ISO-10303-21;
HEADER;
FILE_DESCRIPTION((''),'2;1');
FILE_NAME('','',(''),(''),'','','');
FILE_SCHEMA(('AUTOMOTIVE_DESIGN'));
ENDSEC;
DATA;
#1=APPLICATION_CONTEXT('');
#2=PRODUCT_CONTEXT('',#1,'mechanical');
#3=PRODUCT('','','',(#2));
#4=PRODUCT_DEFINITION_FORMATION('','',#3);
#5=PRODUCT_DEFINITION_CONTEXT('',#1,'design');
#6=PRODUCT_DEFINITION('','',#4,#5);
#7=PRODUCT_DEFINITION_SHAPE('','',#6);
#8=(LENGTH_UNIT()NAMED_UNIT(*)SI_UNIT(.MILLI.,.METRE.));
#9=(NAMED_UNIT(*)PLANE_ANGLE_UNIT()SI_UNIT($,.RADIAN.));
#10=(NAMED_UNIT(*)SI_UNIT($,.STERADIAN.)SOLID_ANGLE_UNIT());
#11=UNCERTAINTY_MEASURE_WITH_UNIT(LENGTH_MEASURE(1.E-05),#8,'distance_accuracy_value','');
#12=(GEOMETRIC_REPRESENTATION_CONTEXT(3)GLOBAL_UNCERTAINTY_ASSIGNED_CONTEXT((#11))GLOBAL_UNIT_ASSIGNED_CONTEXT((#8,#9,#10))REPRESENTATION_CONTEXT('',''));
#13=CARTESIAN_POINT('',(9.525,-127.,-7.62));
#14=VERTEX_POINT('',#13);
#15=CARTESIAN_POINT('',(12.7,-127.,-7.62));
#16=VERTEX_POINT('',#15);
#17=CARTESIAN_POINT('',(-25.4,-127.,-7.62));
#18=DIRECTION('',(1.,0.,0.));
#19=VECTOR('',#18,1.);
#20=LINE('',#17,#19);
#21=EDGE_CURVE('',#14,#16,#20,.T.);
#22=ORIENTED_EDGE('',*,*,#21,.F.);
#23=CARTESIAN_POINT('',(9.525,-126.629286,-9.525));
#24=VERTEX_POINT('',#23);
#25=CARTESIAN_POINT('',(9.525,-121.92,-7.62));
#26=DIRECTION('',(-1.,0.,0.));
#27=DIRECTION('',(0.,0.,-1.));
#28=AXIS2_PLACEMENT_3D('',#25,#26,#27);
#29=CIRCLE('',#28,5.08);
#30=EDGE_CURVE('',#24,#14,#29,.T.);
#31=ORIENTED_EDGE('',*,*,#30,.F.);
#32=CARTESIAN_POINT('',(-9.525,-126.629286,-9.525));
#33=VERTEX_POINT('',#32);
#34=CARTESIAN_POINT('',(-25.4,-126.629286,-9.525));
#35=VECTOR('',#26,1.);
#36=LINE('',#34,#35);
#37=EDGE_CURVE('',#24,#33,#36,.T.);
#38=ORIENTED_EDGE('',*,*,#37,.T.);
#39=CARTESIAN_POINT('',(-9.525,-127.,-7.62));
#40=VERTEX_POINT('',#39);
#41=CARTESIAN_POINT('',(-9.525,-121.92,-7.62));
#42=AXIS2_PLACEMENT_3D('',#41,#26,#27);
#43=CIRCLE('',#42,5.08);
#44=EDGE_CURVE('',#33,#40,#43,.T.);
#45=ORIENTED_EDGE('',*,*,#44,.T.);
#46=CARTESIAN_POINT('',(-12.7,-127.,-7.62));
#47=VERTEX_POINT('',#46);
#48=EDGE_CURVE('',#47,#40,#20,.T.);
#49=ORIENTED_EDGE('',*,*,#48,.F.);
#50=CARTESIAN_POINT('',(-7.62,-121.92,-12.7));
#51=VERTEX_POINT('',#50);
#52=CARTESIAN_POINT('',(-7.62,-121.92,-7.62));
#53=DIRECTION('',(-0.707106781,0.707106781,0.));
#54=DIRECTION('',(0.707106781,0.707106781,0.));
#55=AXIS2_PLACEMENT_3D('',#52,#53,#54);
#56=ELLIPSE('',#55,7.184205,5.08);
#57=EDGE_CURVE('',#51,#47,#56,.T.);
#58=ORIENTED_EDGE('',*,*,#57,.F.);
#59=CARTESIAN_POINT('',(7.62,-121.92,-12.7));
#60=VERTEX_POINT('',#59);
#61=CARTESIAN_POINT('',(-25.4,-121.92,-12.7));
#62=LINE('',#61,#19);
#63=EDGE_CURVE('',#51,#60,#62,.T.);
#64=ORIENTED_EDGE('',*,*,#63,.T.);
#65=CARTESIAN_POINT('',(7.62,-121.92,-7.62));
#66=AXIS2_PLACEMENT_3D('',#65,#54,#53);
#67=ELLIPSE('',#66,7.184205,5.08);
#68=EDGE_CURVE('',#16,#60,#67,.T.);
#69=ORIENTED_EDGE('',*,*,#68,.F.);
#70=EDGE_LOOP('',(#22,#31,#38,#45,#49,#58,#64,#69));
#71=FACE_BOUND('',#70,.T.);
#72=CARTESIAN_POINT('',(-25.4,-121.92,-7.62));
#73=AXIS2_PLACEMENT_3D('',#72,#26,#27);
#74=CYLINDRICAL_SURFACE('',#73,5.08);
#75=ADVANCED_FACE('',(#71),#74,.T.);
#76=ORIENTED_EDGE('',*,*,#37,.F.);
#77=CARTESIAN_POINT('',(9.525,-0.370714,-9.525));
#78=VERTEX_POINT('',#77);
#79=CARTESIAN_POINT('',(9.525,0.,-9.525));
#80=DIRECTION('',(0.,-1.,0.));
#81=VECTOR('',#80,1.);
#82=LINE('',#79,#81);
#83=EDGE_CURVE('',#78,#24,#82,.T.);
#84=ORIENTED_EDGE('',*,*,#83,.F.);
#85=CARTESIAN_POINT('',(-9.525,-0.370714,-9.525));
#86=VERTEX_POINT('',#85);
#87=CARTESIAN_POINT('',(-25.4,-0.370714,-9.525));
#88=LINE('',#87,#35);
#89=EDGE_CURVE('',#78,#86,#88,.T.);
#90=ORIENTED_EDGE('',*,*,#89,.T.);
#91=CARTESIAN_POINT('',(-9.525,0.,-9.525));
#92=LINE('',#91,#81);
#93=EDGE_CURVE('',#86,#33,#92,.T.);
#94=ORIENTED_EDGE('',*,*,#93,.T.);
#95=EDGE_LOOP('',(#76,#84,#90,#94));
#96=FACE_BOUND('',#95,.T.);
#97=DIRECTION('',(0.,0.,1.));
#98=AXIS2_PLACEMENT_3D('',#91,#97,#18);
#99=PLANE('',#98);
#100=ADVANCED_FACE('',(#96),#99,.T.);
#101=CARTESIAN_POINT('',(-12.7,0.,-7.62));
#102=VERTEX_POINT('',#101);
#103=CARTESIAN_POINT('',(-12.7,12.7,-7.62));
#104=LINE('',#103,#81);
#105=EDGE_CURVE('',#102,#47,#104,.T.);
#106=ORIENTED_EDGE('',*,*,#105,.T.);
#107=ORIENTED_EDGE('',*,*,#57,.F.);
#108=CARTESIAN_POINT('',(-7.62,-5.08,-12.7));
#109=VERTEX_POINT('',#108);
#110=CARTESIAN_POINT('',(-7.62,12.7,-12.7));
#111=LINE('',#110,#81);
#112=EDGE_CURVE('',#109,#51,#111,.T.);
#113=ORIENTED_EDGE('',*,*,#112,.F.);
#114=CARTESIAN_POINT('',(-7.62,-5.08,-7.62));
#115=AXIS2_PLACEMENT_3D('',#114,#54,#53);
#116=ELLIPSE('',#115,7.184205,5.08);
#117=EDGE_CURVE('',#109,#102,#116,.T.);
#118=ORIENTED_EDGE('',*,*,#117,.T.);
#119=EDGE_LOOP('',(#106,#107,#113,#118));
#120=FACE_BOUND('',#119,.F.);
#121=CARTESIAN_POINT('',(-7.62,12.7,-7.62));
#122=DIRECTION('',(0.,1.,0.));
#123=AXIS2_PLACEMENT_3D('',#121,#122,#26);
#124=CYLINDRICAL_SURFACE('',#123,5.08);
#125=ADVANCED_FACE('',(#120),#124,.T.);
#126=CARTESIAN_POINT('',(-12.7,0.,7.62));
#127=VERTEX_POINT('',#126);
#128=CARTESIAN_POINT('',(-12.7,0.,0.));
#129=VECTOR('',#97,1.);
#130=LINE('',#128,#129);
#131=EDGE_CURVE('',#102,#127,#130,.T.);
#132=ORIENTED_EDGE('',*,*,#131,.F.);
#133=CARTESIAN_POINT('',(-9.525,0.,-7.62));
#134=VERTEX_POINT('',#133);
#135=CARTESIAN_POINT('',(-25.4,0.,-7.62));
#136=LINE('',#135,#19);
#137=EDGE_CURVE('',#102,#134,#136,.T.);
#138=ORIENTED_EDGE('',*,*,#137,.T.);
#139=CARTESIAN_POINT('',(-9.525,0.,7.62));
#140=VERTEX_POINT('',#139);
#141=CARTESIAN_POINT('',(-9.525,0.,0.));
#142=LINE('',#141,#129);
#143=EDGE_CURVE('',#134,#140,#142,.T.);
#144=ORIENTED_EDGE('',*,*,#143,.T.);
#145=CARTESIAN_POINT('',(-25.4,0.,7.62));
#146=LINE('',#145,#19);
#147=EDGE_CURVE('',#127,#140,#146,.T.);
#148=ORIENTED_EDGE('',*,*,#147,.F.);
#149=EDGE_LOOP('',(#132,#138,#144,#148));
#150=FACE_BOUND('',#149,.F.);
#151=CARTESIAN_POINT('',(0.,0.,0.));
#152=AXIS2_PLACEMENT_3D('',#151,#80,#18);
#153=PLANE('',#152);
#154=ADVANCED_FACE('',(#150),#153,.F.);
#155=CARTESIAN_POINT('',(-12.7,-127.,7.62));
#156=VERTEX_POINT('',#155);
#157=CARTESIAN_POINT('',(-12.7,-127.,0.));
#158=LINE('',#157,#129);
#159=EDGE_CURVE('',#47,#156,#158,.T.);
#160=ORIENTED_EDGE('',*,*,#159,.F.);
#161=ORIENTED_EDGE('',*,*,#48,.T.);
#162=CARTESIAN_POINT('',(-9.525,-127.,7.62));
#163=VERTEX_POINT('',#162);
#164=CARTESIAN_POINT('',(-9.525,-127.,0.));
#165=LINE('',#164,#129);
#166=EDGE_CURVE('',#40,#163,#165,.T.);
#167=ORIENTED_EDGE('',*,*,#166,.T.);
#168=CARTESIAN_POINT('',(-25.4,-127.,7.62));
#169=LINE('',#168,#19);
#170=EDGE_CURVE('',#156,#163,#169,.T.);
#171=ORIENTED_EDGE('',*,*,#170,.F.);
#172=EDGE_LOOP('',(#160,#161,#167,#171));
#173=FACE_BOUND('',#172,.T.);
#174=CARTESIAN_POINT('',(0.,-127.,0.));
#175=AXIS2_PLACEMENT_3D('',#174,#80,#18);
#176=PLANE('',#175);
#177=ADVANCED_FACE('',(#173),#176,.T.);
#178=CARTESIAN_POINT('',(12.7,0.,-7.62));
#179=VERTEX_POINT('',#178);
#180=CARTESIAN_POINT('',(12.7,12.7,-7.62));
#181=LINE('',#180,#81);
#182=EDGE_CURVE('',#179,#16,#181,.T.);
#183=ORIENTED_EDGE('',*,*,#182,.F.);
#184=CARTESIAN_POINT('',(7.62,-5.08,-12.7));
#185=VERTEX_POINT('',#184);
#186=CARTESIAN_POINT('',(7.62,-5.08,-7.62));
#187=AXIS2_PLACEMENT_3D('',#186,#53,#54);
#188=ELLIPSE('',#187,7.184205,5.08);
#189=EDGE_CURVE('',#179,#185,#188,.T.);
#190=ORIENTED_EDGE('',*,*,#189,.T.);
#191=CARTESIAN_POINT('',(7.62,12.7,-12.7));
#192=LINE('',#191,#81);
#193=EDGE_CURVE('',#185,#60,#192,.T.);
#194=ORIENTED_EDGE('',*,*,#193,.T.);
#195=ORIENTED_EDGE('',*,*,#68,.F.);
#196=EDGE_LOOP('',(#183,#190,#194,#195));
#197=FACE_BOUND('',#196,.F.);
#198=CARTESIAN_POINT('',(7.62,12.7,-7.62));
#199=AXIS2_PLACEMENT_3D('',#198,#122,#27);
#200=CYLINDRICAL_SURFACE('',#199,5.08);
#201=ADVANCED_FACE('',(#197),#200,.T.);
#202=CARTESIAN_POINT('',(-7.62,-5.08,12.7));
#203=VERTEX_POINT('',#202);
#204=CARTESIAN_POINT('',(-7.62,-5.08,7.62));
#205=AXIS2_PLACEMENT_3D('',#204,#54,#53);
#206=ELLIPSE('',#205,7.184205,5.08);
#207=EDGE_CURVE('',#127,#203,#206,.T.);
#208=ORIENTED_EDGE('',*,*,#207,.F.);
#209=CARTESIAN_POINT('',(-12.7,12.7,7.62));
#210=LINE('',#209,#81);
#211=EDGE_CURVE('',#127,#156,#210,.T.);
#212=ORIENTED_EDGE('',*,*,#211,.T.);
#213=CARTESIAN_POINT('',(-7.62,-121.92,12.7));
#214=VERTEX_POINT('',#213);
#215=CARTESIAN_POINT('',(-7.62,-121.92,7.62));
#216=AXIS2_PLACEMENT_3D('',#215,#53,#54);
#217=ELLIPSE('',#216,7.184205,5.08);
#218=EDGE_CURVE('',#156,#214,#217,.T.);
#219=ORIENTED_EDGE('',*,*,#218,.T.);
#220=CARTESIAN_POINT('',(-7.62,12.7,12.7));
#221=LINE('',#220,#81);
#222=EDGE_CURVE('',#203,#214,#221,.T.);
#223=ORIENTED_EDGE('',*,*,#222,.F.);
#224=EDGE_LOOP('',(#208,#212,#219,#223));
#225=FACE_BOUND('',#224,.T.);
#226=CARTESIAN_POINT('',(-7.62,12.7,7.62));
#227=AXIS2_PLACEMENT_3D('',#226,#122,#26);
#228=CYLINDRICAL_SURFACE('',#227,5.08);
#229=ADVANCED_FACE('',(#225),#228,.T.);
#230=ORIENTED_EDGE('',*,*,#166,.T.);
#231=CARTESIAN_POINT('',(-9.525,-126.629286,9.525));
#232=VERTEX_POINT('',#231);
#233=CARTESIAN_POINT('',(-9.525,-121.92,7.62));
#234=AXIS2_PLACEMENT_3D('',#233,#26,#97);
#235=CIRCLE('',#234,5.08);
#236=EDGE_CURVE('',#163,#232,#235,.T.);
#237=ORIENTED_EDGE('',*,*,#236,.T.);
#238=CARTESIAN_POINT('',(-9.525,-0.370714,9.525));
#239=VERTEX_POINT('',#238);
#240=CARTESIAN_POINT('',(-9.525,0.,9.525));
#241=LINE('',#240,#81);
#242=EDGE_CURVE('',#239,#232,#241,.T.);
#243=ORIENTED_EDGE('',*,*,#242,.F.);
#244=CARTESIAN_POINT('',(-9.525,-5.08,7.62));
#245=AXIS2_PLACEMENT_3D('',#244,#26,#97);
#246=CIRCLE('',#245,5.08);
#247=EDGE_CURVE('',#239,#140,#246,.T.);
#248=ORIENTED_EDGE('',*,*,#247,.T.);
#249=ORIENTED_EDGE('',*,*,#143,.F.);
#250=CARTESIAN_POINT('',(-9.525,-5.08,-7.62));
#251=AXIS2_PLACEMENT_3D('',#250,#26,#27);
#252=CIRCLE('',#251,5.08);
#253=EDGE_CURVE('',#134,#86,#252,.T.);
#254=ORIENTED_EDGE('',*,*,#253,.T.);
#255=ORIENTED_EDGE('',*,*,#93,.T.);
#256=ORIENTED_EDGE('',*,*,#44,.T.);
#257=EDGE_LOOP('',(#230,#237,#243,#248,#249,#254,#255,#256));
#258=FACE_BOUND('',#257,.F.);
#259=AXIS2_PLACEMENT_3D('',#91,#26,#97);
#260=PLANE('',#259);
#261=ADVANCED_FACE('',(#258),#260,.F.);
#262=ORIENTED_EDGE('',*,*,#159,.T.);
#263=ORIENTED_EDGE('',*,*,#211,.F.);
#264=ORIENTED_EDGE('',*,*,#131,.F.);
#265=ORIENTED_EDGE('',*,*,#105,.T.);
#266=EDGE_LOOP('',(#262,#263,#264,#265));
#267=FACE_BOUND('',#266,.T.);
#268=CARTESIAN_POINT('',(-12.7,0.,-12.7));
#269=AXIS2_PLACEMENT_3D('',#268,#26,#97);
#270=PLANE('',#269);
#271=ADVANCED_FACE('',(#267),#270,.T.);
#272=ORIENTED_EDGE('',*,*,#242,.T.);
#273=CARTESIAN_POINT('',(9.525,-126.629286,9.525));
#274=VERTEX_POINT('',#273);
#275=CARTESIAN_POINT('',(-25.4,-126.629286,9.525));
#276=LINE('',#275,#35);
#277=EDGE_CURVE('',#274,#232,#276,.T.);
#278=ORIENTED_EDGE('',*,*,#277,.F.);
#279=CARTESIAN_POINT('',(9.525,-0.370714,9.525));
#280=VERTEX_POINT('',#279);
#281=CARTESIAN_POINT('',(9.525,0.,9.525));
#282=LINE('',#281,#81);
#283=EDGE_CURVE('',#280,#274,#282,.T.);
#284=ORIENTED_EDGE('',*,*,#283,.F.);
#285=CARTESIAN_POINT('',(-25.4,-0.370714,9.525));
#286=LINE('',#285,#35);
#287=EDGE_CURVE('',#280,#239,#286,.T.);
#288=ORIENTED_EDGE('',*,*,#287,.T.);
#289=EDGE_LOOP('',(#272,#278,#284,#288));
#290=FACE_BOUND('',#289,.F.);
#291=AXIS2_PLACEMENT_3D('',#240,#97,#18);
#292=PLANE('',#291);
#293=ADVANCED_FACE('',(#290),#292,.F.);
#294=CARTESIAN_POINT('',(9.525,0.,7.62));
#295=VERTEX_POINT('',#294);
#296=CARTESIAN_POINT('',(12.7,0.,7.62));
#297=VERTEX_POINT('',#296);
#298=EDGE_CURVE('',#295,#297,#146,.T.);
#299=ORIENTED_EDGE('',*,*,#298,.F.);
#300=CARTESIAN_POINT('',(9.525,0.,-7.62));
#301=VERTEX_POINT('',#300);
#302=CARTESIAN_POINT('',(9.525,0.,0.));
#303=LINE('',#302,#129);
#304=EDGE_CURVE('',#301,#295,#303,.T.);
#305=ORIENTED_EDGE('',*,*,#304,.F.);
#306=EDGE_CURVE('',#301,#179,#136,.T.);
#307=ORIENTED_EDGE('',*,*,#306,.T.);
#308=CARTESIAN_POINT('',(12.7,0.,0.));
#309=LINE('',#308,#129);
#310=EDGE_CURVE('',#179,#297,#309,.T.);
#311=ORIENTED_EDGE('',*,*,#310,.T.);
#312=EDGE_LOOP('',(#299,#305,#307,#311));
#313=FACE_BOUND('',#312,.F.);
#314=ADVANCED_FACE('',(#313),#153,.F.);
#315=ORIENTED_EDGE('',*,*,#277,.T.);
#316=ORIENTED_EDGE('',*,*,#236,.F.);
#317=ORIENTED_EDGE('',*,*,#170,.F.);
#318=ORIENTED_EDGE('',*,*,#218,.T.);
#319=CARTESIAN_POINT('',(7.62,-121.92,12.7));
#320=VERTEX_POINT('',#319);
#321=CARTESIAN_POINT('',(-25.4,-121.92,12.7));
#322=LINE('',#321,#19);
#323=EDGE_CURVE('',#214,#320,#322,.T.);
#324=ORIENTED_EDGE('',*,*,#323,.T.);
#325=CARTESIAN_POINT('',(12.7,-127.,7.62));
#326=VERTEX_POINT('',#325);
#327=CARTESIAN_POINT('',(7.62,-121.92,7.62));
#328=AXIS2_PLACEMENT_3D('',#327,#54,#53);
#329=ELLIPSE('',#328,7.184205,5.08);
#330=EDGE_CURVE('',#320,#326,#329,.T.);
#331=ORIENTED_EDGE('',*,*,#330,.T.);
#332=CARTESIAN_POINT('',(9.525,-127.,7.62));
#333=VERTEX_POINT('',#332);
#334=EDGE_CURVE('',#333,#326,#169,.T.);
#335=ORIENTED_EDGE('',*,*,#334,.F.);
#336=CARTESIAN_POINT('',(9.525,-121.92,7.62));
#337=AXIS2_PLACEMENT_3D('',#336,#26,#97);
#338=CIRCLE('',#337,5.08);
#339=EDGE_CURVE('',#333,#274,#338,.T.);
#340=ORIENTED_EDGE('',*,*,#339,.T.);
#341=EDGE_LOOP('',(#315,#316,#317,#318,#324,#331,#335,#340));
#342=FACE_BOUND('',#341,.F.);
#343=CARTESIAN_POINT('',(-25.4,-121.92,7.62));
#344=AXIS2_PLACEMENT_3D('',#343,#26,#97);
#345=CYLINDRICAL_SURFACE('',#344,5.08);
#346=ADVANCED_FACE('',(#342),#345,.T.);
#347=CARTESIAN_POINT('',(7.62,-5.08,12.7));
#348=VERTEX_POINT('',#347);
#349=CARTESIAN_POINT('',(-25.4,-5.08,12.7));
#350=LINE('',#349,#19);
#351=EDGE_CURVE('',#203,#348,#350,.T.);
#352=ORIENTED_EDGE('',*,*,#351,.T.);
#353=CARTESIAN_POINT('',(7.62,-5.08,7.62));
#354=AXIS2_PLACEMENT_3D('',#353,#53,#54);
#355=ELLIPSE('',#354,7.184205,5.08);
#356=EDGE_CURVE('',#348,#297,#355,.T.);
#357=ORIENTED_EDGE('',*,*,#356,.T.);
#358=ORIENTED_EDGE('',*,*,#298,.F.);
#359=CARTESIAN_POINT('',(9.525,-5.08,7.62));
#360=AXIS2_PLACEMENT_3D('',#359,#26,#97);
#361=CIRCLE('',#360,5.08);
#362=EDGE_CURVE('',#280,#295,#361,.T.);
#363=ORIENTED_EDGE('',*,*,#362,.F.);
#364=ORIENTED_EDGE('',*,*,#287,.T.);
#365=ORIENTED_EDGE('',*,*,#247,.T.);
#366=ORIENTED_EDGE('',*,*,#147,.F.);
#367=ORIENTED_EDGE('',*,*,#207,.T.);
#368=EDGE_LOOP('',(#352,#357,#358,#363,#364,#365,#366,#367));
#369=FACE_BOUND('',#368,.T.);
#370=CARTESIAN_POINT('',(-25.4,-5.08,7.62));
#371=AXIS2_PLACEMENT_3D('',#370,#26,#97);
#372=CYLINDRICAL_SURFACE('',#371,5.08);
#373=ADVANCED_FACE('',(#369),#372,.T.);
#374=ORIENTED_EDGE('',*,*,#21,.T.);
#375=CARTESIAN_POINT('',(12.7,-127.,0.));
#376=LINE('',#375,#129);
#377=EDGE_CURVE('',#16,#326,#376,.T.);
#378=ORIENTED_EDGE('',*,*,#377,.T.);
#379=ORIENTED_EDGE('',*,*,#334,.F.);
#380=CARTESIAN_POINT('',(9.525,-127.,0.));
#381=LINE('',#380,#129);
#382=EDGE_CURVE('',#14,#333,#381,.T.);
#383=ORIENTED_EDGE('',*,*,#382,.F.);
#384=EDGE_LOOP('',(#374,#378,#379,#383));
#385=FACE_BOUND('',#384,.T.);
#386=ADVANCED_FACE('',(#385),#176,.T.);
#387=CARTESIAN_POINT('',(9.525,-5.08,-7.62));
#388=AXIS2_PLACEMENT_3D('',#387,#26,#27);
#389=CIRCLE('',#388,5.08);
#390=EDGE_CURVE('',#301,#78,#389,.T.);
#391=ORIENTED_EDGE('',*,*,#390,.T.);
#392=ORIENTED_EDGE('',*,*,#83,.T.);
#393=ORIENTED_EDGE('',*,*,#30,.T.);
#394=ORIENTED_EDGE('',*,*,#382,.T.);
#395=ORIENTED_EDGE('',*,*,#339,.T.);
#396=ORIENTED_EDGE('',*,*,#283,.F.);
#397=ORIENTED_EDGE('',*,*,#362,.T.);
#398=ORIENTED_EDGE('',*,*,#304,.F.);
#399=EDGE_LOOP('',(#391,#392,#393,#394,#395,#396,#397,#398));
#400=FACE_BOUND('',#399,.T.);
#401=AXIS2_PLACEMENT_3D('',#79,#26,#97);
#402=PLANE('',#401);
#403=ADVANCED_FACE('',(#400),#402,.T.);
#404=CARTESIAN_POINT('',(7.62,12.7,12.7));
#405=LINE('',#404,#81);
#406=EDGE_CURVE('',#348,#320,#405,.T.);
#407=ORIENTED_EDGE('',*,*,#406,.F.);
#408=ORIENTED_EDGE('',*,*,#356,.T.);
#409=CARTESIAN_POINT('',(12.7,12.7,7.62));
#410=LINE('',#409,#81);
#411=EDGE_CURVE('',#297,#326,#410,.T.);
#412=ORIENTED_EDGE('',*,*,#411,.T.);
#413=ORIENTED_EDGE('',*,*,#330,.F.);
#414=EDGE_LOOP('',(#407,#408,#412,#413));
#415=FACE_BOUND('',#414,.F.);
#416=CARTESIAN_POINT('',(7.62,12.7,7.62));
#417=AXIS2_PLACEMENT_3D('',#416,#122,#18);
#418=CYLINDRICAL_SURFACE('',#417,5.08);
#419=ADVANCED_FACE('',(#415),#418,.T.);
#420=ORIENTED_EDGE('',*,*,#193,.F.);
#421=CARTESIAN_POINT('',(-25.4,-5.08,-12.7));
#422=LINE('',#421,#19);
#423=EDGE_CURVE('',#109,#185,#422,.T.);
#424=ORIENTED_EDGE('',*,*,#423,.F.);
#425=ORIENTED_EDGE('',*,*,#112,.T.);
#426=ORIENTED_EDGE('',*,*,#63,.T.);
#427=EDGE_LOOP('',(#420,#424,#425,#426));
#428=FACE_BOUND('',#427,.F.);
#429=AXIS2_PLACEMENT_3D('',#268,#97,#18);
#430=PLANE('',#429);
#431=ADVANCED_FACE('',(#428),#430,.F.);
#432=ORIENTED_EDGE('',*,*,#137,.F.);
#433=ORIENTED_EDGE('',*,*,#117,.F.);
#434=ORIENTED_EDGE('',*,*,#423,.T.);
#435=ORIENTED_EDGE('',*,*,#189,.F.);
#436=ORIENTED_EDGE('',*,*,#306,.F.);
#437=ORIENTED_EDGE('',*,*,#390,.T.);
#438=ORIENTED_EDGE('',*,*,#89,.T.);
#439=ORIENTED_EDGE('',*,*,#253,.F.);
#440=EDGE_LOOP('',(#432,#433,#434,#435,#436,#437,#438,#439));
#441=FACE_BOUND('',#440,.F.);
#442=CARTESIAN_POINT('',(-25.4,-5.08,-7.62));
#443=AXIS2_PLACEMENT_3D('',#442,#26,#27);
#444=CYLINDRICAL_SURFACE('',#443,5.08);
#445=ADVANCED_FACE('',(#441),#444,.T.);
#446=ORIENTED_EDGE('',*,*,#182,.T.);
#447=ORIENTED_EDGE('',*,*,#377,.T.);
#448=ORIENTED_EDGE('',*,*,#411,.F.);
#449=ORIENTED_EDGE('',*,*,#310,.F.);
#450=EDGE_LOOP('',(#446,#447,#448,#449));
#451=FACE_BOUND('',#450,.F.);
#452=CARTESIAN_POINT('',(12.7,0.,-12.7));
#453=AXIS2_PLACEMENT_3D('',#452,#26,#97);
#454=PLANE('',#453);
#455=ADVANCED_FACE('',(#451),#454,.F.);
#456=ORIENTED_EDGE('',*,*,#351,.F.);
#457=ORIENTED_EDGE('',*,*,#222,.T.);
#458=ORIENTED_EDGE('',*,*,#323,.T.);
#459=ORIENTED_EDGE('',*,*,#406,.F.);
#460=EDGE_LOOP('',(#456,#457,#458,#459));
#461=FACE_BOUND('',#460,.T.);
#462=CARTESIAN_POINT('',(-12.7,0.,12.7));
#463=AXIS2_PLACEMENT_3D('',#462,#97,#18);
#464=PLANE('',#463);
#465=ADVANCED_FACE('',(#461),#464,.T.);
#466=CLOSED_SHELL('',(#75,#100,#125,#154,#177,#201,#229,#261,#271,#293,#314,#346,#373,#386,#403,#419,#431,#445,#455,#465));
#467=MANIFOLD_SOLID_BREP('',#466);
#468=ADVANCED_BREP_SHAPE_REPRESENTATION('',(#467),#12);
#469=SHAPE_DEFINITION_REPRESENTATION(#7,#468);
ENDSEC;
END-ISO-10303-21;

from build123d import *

# Parameters (mm, degrees)
F0_W        = 25.4
F0_H        = 25.4
F0_W_2      = 19.05
F0_H_2      = 19.05
F1_DEPTH    = 127
F2_T1_DEPTH = 152.4
F2_T3_DEPTH = 50.8


# Not quite as in the source:
# - a fillet or chamfer that OpenCascade refuses, or shapes differently, is made with other operations: its cross-section is extruded or revolved along the edge and cut away or added


with BuildPart() as f1:
    # F0 (on Front) → F1 (new body)
    with BuildSketch(Plane.XZ):
        Rectangle(F0_W, F0_H)
        Rectangle(F0_W_2, F0_H_2, mode=Mode.SUBTRACT)
    extrude(amount=F1_DEPTH)

    # F2: fillet of radius 5.08 on 8 edges, made by hand

    # F2_s2 → F2_t1 (cut)
    with BuildSketch(Plane.XZ.offset(-12.7)):
        with BuildLine():
            ThreePointArc((12.7, 7.62), (11.2121024484, 11.2121024484), (7.62, 12.7))
            Line((7.62, 12.7), (12.7, 12.7))
            Line((12.7, 12.7), (12.7, 7.62))
        make_face()
        with BuildLine():
            ThreePointArc((-12.7, 7.62), (-11.2121024484, 11.2121024484), (-7.62, 12.7))
            Line((-7.62, 12.7), (-12.7, 12.7))
            Line((-12.7, 12.7), (-12.7, 7.62))
        make_face()
        with BuildLine():
            ThreePointArc((-12.7, -7.62), (-11.2121024484, -11.2121024484), (-7.62, -12.7))
            Line((-7.62, -12.7), (-12.7, -12.7))
            Line((-12.7, -12.7), (-12.7, -7.62))
        make_face()
        with BuildLine():
            ThreePointArc((7.62, -12.7), (11.2121024484, -11.2121024484), (12.7, -7.62))
            Line((12.7, -7.62), (12.7, -12.7))
            Line((12.7, -12.7), (7.62, -12.7))
        make_face()
    extrude(amount=F2_T1_DEPTH, mode=Mode.SUBTRACT)

    # F2_s4 → F2_t3 (cut)
    with BuildSketch(Plane.YZ.offset(-25.4)):
        with BuildLine():
            ThreePointArc((-5.08, 12.7), (-1.4878975516, 11.2121024484), (0, 7.62))
            Line((0, 7.62), (0, 12.7))
            Line((0, 12.7), (-5.08, 12.7))
        make_face()
        with BuildLine():
            ThreePointArc((-121.92, 12.7), (-125.5121024484, 11.2121024484), (-127, 7.62))
            Line((-127, 7.62), (-127, 12.7))
            Line((-127, 12.7), (-121.92, 12.7))
        make_face()
        with BuildLine():
            ThreePointArc((-5.08, -12.7), (-1.4878975516, -11.2121024484), (0, -7.62))
            Line((0, -7.62), (0, -12.7))
            Line((0, -12.7), (-5.08, -12.7))
        make_face()
        with BuildLine():
            ThreePointArc((-121.92, -12.7), (-125.5121024484, -11.2121024484), (-127, -7.62))
            Line((-127, -7.62), (-127, -12.7))
            Line((-127, -12.7), (-121.92, -12.7))
        make_face()
    extrude(amount=F2_T3_DEPTH, mode=Mode.SUBTRACT)


solid = f1.part
